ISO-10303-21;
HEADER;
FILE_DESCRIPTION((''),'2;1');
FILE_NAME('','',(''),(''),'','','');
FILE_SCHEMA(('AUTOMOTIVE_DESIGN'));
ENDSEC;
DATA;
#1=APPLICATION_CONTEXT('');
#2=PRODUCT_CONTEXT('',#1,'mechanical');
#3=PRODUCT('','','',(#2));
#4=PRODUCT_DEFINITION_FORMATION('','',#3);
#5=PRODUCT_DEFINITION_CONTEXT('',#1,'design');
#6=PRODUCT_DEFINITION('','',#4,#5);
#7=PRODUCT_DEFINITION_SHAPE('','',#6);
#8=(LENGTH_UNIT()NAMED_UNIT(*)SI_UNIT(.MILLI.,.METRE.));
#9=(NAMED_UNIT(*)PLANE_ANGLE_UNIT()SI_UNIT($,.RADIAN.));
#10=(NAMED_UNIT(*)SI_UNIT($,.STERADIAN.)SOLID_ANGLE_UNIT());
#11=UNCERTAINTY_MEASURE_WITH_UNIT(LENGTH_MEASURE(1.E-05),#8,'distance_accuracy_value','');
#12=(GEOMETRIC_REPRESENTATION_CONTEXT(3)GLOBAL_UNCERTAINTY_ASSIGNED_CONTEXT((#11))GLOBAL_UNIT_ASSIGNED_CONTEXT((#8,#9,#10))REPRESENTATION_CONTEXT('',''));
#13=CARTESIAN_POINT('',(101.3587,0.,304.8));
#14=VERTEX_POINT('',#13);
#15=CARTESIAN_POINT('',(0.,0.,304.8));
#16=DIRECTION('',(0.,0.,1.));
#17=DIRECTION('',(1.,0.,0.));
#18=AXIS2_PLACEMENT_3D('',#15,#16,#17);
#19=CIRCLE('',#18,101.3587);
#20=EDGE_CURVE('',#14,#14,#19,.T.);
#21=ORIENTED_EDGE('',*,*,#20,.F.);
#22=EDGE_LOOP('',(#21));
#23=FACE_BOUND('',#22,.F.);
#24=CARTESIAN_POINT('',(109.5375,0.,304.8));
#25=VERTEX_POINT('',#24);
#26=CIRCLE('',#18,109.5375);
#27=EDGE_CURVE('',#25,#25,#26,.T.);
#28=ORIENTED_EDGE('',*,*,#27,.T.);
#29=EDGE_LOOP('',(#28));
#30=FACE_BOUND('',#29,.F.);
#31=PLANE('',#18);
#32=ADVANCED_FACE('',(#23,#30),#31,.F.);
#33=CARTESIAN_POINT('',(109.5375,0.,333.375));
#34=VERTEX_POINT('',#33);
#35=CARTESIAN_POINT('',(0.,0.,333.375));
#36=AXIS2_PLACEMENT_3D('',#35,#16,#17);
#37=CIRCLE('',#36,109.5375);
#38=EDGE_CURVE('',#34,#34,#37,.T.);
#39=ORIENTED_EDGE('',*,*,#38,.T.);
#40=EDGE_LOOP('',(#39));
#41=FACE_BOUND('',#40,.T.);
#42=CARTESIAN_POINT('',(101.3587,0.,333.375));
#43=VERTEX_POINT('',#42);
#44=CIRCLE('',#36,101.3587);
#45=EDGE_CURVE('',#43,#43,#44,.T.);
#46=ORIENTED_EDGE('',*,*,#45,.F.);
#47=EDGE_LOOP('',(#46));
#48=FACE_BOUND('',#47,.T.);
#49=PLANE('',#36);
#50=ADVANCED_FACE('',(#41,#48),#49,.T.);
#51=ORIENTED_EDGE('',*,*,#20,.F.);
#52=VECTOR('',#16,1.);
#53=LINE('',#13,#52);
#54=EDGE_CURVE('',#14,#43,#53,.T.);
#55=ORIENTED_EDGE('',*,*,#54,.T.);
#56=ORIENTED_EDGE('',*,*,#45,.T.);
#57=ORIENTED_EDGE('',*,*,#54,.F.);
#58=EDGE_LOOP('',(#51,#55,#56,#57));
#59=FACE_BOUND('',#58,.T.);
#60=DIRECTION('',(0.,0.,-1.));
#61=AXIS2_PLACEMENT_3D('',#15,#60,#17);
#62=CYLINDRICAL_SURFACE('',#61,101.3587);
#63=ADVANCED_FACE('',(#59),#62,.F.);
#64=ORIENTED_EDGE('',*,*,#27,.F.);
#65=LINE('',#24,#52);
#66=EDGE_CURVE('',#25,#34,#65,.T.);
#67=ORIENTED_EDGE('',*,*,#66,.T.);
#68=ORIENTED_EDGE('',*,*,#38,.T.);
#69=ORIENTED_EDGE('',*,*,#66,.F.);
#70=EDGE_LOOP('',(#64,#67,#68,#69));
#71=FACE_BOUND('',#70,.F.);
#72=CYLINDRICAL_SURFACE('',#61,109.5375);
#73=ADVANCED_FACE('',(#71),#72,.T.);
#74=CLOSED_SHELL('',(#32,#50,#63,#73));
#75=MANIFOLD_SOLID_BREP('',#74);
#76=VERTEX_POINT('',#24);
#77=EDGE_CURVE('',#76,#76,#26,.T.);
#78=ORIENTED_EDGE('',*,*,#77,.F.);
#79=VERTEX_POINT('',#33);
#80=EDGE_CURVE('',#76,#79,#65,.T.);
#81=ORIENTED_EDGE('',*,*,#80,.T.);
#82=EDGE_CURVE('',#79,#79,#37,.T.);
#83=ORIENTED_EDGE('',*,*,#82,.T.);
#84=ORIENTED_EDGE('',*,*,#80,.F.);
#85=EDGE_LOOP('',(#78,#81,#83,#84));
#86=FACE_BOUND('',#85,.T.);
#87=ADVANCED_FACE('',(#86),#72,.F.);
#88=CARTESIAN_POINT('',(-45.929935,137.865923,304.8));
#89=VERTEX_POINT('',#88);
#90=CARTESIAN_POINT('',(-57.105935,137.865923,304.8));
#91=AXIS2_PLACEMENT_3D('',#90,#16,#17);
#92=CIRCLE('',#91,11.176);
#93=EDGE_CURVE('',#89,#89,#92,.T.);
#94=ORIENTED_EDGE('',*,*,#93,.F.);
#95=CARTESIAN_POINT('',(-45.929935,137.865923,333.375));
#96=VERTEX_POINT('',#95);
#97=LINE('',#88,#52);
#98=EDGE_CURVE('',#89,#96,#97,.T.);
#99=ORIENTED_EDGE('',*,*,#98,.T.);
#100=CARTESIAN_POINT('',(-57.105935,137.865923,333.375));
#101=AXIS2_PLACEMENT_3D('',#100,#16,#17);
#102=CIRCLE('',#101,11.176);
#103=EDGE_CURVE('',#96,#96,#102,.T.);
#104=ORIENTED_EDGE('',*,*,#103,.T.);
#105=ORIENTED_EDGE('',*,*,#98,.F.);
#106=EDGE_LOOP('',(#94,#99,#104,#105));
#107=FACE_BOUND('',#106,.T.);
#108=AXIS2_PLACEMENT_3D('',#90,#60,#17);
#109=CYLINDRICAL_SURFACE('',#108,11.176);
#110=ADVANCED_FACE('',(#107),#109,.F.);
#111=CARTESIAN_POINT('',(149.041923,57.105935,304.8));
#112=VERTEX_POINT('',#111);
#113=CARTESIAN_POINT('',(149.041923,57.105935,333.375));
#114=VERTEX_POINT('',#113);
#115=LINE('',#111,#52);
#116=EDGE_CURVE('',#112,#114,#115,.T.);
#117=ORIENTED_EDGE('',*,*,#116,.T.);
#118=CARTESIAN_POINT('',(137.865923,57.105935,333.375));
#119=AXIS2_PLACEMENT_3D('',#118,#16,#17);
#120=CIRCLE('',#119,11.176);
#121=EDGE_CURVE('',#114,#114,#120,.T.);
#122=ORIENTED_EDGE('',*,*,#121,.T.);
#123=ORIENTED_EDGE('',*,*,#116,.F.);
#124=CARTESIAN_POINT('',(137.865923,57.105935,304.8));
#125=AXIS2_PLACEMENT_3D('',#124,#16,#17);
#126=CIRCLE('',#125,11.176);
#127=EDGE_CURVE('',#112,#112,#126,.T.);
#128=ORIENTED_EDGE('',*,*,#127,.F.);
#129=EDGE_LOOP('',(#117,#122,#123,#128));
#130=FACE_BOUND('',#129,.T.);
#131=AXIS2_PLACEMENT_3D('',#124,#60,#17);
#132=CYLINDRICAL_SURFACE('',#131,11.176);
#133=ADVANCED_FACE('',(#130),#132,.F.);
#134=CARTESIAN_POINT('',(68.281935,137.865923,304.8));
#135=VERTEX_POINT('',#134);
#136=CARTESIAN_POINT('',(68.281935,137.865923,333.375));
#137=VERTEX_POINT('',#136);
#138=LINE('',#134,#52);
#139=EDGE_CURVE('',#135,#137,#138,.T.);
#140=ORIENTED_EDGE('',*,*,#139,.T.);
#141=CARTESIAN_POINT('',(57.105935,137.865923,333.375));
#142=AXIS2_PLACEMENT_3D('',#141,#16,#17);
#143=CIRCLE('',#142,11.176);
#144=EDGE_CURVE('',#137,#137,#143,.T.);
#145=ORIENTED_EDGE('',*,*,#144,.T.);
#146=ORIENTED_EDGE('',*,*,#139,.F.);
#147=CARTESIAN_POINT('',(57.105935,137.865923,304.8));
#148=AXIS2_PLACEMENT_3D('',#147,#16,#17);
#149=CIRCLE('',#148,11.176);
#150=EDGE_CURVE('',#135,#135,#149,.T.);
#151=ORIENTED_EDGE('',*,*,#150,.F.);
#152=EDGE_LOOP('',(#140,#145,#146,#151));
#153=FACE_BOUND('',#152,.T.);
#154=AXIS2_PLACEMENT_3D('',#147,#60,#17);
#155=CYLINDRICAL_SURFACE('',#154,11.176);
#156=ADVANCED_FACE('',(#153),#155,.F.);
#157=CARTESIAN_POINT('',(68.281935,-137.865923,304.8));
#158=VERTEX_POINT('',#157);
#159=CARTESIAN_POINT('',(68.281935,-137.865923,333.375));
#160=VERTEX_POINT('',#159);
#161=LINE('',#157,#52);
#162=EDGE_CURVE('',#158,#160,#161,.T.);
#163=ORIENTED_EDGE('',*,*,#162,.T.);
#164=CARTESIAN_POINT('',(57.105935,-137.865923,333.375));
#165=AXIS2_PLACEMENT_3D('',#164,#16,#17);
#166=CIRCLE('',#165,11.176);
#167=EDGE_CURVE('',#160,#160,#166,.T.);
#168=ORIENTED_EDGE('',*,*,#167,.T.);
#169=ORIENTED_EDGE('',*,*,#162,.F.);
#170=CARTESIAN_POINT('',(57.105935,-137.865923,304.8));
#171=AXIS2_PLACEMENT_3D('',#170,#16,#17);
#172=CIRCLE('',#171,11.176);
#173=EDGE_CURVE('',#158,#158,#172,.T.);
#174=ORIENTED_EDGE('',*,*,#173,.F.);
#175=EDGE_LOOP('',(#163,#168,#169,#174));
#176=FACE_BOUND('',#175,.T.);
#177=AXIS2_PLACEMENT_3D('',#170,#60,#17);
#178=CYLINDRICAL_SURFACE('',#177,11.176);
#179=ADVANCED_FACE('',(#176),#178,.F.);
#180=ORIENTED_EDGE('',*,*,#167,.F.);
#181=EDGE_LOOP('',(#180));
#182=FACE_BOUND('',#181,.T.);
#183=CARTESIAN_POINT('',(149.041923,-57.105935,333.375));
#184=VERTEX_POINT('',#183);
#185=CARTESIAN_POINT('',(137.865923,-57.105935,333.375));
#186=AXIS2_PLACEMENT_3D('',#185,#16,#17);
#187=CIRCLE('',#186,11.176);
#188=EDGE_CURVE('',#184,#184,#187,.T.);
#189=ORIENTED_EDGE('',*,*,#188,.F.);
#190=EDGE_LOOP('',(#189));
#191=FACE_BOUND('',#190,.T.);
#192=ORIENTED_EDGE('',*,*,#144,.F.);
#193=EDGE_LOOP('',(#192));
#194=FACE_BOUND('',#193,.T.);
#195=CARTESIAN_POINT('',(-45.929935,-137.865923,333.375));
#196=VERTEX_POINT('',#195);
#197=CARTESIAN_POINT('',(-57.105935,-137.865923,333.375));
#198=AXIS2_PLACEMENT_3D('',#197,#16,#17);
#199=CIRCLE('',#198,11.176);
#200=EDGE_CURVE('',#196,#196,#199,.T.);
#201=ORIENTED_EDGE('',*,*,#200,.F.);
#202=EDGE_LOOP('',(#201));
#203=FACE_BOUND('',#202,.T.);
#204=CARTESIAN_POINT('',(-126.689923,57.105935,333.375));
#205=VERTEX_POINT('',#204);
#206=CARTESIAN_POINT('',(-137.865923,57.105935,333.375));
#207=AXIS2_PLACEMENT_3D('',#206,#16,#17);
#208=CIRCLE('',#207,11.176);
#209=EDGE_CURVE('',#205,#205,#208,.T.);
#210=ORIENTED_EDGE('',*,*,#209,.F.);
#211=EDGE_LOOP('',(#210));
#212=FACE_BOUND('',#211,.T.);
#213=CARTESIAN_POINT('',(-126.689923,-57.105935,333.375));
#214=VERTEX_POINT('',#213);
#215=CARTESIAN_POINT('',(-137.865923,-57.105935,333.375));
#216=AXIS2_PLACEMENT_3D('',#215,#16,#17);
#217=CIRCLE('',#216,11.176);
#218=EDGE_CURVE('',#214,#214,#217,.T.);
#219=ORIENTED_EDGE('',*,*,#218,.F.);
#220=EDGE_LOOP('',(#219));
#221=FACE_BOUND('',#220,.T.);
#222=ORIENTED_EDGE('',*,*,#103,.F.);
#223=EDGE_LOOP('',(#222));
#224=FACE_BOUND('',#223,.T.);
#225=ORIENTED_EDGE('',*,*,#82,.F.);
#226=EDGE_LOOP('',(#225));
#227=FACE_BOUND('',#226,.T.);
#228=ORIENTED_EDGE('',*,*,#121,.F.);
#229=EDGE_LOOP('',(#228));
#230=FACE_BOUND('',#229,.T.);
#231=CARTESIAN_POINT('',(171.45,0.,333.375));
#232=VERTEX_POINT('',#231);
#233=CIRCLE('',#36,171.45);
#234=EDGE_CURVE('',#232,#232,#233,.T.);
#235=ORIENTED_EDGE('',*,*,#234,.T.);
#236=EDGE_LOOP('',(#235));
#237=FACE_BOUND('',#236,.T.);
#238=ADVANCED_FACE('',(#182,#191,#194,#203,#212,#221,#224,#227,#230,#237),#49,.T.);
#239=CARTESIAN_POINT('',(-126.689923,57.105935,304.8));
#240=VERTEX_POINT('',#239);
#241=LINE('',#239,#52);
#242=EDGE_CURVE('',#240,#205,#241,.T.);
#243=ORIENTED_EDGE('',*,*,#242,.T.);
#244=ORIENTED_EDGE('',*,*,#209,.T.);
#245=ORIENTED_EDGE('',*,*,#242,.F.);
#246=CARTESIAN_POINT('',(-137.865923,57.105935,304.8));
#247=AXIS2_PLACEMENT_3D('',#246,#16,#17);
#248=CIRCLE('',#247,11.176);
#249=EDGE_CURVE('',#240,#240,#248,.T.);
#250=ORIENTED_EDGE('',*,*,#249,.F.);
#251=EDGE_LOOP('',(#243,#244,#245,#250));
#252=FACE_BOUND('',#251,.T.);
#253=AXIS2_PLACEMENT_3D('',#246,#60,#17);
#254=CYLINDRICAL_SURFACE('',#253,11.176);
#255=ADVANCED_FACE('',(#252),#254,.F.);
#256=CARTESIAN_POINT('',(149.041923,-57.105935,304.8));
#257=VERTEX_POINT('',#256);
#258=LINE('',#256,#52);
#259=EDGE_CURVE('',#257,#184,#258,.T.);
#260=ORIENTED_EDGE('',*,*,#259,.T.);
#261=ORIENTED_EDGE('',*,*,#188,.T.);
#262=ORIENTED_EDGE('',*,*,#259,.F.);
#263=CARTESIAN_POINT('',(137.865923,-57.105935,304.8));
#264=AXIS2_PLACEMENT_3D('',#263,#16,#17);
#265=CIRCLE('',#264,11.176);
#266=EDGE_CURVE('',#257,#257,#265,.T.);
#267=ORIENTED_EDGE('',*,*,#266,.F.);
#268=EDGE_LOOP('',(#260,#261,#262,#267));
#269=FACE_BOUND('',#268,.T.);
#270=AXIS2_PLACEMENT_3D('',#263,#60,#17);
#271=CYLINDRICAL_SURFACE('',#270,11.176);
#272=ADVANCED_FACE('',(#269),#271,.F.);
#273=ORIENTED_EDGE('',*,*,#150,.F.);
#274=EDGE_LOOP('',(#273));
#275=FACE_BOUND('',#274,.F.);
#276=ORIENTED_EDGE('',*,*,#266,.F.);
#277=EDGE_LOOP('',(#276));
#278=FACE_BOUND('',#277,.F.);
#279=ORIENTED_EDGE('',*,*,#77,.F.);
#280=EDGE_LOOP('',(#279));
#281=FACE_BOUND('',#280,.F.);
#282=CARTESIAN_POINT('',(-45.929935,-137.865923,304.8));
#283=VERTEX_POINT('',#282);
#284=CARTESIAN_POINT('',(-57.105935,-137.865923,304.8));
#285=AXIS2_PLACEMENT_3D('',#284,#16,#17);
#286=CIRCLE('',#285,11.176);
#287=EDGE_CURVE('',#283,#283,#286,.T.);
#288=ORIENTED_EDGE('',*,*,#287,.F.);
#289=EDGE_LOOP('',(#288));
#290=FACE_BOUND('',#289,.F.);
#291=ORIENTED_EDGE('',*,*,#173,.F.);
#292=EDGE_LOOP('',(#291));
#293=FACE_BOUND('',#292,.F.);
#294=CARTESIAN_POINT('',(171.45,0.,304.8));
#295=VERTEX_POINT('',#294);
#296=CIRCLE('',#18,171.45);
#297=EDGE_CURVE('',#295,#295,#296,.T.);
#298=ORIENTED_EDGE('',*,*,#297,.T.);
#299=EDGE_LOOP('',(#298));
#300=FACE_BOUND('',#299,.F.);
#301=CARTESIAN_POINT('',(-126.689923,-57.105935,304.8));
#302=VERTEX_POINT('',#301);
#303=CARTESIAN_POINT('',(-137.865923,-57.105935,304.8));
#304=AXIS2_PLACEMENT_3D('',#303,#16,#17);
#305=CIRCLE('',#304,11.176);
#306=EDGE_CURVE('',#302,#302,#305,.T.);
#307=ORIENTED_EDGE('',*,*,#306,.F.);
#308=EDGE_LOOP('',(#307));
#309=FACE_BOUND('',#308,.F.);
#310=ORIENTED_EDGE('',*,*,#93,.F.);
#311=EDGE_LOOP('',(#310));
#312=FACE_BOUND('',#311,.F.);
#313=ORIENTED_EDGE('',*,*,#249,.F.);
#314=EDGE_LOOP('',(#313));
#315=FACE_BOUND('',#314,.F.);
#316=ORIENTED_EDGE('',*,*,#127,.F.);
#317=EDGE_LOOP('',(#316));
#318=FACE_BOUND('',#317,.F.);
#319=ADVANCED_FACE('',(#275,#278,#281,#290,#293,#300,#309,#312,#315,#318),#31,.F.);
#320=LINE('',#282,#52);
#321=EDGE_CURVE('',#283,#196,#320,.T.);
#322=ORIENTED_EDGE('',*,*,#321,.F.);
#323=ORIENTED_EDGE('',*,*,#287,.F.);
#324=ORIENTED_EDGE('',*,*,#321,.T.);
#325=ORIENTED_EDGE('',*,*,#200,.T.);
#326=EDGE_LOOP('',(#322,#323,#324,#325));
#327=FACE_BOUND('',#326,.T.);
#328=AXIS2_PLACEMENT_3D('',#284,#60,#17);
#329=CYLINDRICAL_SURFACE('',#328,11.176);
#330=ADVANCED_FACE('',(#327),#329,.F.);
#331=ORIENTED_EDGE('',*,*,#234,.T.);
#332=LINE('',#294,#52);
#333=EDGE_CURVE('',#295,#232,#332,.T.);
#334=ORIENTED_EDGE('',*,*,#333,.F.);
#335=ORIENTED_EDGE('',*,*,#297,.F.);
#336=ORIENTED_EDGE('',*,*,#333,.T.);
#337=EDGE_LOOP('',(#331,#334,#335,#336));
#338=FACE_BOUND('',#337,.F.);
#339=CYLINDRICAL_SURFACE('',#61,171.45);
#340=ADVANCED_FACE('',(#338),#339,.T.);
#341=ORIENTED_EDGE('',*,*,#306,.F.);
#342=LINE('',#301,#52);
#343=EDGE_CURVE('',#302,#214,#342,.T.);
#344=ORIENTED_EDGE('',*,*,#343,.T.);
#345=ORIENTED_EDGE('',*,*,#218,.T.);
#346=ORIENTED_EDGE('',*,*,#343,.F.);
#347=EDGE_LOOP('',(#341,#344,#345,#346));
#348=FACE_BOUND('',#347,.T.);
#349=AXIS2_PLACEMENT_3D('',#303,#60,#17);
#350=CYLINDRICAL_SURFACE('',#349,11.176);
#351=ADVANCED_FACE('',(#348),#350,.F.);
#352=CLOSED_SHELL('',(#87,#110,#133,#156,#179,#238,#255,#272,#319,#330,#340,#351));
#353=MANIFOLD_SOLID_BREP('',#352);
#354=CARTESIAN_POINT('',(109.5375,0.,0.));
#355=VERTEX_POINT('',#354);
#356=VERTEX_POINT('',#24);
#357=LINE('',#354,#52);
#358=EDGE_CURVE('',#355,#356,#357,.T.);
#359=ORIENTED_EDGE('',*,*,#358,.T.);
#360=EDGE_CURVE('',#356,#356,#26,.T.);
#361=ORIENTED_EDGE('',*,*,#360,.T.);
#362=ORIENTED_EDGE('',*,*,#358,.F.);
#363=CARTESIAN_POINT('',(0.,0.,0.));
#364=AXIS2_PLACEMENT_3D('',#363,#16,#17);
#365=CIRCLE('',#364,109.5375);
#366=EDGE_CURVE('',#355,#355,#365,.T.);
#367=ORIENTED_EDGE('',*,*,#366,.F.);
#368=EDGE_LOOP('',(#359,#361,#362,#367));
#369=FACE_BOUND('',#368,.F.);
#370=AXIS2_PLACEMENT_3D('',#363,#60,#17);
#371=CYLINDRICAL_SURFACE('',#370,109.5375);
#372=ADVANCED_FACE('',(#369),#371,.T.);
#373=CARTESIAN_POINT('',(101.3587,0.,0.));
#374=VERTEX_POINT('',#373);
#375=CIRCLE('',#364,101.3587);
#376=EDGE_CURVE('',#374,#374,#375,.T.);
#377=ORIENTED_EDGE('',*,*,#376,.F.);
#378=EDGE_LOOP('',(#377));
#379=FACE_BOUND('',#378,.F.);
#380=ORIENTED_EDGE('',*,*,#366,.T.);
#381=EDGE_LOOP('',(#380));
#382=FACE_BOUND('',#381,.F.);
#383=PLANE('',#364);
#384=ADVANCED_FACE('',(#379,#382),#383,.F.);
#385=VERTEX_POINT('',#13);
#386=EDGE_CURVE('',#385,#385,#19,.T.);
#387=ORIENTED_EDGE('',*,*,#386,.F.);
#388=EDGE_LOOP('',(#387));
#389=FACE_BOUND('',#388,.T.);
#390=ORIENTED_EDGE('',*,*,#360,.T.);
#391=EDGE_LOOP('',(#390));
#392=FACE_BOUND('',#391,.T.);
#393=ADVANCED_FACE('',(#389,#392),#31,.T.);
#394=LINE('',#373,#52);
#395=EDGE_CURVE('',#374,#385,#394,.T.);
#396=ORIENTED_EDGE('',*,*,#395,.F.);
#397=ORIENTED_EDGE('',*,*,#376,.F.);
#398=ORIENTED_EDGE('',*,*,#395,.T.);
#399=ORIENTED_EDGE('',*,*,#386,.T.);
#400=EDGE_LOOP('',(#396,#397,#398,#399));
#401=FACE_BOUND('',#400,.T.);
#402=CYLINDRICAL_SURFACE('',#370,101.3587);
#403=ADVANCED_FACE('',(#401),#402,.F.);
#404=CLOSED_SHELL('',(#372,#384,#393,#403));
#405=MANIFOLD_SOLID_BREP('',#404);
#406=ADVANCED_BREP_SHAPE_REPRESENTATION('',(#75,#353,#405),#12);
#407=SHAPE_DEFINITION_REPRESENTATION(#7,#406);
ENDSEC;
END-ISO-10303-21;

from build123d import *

# Parameters (mm, degrees)
F0_R     = 109.5375
F0_R_2   = 101.3587
F1_DEPTH = 304.8
F2_R     = 171.45
F2_R_2   = 11.176
F2_R_3   = 109.5375
F3_DEPTH = 28.575
F4_DEPTH = 28.575


# Not quite as in the source:
# - a feature names something its author has since deleted; it is built from what else it names


with BuildPart() as f1:
    # F0 (on Top) → F1 (new body)
    with BuildSketch(Plane.XY):
        Circle(F0_R)
        Circle(F0_R_2, mode=Mode.SUBTRACT)
    extrude(amount=F1_DEPTH)


with BuildPart() as f3:
    # F2 (on face) → F3 (new body)
    with BuildSketch(Plane.XY.offset(304.8)):
        Circle(F2_R)
        with Locations((-57.1059351947, -137.865923239)):
            Circle(F2_R_2, mode=Mode.SUBTRACT)
        with Locations((-137.865923239, -57.1059351947)):
            Circle(F2_R_2, mode=Mode.SUBTRACT)
        with Locations((57.1059351947, -137.865923239)):
            Circle(F2_R_2, mode=Mode.SUBTRACT)
        with Locations((137.865923239, -57.1059351947)):
            Circle(F2_R_2, mode=Mode.SUBTRACT)
        with Locations((-137.865923239, 57.1059351947)):
            Circle(F2_R_2, mode=Mode.SUBTRACT)
        with Locations((-57.1059351947, 137.865923239)):
            Circle(F2_R_2, mode=Mode.SUBTRACT)
        Circle(F2_R_3, mode=Mode.SUBTRACT)
        with Locations((137.865923239, 57.1059351947)):
            Circle(F2_R_2, mode=Mode.SUBTRACT)
        with Locations((57.1059351947, 137.865923239)):
            Circle(F2_R_2, mode=Mode.SUBTRACT)
    extrude(amount=F3_DEPTH)


with BuildPart() as f4:
    # F4 (new): a face of the model
    f4_faces = [f1.part.faces().sort_by_distance(p)[0] for p in [
        (-106.4393116382, 0, 304.8),
    ]]
    extrude(f4_faces, amount=F4_DEPTH)


solid = Compound([f1.part, f3.part, f4.part])
